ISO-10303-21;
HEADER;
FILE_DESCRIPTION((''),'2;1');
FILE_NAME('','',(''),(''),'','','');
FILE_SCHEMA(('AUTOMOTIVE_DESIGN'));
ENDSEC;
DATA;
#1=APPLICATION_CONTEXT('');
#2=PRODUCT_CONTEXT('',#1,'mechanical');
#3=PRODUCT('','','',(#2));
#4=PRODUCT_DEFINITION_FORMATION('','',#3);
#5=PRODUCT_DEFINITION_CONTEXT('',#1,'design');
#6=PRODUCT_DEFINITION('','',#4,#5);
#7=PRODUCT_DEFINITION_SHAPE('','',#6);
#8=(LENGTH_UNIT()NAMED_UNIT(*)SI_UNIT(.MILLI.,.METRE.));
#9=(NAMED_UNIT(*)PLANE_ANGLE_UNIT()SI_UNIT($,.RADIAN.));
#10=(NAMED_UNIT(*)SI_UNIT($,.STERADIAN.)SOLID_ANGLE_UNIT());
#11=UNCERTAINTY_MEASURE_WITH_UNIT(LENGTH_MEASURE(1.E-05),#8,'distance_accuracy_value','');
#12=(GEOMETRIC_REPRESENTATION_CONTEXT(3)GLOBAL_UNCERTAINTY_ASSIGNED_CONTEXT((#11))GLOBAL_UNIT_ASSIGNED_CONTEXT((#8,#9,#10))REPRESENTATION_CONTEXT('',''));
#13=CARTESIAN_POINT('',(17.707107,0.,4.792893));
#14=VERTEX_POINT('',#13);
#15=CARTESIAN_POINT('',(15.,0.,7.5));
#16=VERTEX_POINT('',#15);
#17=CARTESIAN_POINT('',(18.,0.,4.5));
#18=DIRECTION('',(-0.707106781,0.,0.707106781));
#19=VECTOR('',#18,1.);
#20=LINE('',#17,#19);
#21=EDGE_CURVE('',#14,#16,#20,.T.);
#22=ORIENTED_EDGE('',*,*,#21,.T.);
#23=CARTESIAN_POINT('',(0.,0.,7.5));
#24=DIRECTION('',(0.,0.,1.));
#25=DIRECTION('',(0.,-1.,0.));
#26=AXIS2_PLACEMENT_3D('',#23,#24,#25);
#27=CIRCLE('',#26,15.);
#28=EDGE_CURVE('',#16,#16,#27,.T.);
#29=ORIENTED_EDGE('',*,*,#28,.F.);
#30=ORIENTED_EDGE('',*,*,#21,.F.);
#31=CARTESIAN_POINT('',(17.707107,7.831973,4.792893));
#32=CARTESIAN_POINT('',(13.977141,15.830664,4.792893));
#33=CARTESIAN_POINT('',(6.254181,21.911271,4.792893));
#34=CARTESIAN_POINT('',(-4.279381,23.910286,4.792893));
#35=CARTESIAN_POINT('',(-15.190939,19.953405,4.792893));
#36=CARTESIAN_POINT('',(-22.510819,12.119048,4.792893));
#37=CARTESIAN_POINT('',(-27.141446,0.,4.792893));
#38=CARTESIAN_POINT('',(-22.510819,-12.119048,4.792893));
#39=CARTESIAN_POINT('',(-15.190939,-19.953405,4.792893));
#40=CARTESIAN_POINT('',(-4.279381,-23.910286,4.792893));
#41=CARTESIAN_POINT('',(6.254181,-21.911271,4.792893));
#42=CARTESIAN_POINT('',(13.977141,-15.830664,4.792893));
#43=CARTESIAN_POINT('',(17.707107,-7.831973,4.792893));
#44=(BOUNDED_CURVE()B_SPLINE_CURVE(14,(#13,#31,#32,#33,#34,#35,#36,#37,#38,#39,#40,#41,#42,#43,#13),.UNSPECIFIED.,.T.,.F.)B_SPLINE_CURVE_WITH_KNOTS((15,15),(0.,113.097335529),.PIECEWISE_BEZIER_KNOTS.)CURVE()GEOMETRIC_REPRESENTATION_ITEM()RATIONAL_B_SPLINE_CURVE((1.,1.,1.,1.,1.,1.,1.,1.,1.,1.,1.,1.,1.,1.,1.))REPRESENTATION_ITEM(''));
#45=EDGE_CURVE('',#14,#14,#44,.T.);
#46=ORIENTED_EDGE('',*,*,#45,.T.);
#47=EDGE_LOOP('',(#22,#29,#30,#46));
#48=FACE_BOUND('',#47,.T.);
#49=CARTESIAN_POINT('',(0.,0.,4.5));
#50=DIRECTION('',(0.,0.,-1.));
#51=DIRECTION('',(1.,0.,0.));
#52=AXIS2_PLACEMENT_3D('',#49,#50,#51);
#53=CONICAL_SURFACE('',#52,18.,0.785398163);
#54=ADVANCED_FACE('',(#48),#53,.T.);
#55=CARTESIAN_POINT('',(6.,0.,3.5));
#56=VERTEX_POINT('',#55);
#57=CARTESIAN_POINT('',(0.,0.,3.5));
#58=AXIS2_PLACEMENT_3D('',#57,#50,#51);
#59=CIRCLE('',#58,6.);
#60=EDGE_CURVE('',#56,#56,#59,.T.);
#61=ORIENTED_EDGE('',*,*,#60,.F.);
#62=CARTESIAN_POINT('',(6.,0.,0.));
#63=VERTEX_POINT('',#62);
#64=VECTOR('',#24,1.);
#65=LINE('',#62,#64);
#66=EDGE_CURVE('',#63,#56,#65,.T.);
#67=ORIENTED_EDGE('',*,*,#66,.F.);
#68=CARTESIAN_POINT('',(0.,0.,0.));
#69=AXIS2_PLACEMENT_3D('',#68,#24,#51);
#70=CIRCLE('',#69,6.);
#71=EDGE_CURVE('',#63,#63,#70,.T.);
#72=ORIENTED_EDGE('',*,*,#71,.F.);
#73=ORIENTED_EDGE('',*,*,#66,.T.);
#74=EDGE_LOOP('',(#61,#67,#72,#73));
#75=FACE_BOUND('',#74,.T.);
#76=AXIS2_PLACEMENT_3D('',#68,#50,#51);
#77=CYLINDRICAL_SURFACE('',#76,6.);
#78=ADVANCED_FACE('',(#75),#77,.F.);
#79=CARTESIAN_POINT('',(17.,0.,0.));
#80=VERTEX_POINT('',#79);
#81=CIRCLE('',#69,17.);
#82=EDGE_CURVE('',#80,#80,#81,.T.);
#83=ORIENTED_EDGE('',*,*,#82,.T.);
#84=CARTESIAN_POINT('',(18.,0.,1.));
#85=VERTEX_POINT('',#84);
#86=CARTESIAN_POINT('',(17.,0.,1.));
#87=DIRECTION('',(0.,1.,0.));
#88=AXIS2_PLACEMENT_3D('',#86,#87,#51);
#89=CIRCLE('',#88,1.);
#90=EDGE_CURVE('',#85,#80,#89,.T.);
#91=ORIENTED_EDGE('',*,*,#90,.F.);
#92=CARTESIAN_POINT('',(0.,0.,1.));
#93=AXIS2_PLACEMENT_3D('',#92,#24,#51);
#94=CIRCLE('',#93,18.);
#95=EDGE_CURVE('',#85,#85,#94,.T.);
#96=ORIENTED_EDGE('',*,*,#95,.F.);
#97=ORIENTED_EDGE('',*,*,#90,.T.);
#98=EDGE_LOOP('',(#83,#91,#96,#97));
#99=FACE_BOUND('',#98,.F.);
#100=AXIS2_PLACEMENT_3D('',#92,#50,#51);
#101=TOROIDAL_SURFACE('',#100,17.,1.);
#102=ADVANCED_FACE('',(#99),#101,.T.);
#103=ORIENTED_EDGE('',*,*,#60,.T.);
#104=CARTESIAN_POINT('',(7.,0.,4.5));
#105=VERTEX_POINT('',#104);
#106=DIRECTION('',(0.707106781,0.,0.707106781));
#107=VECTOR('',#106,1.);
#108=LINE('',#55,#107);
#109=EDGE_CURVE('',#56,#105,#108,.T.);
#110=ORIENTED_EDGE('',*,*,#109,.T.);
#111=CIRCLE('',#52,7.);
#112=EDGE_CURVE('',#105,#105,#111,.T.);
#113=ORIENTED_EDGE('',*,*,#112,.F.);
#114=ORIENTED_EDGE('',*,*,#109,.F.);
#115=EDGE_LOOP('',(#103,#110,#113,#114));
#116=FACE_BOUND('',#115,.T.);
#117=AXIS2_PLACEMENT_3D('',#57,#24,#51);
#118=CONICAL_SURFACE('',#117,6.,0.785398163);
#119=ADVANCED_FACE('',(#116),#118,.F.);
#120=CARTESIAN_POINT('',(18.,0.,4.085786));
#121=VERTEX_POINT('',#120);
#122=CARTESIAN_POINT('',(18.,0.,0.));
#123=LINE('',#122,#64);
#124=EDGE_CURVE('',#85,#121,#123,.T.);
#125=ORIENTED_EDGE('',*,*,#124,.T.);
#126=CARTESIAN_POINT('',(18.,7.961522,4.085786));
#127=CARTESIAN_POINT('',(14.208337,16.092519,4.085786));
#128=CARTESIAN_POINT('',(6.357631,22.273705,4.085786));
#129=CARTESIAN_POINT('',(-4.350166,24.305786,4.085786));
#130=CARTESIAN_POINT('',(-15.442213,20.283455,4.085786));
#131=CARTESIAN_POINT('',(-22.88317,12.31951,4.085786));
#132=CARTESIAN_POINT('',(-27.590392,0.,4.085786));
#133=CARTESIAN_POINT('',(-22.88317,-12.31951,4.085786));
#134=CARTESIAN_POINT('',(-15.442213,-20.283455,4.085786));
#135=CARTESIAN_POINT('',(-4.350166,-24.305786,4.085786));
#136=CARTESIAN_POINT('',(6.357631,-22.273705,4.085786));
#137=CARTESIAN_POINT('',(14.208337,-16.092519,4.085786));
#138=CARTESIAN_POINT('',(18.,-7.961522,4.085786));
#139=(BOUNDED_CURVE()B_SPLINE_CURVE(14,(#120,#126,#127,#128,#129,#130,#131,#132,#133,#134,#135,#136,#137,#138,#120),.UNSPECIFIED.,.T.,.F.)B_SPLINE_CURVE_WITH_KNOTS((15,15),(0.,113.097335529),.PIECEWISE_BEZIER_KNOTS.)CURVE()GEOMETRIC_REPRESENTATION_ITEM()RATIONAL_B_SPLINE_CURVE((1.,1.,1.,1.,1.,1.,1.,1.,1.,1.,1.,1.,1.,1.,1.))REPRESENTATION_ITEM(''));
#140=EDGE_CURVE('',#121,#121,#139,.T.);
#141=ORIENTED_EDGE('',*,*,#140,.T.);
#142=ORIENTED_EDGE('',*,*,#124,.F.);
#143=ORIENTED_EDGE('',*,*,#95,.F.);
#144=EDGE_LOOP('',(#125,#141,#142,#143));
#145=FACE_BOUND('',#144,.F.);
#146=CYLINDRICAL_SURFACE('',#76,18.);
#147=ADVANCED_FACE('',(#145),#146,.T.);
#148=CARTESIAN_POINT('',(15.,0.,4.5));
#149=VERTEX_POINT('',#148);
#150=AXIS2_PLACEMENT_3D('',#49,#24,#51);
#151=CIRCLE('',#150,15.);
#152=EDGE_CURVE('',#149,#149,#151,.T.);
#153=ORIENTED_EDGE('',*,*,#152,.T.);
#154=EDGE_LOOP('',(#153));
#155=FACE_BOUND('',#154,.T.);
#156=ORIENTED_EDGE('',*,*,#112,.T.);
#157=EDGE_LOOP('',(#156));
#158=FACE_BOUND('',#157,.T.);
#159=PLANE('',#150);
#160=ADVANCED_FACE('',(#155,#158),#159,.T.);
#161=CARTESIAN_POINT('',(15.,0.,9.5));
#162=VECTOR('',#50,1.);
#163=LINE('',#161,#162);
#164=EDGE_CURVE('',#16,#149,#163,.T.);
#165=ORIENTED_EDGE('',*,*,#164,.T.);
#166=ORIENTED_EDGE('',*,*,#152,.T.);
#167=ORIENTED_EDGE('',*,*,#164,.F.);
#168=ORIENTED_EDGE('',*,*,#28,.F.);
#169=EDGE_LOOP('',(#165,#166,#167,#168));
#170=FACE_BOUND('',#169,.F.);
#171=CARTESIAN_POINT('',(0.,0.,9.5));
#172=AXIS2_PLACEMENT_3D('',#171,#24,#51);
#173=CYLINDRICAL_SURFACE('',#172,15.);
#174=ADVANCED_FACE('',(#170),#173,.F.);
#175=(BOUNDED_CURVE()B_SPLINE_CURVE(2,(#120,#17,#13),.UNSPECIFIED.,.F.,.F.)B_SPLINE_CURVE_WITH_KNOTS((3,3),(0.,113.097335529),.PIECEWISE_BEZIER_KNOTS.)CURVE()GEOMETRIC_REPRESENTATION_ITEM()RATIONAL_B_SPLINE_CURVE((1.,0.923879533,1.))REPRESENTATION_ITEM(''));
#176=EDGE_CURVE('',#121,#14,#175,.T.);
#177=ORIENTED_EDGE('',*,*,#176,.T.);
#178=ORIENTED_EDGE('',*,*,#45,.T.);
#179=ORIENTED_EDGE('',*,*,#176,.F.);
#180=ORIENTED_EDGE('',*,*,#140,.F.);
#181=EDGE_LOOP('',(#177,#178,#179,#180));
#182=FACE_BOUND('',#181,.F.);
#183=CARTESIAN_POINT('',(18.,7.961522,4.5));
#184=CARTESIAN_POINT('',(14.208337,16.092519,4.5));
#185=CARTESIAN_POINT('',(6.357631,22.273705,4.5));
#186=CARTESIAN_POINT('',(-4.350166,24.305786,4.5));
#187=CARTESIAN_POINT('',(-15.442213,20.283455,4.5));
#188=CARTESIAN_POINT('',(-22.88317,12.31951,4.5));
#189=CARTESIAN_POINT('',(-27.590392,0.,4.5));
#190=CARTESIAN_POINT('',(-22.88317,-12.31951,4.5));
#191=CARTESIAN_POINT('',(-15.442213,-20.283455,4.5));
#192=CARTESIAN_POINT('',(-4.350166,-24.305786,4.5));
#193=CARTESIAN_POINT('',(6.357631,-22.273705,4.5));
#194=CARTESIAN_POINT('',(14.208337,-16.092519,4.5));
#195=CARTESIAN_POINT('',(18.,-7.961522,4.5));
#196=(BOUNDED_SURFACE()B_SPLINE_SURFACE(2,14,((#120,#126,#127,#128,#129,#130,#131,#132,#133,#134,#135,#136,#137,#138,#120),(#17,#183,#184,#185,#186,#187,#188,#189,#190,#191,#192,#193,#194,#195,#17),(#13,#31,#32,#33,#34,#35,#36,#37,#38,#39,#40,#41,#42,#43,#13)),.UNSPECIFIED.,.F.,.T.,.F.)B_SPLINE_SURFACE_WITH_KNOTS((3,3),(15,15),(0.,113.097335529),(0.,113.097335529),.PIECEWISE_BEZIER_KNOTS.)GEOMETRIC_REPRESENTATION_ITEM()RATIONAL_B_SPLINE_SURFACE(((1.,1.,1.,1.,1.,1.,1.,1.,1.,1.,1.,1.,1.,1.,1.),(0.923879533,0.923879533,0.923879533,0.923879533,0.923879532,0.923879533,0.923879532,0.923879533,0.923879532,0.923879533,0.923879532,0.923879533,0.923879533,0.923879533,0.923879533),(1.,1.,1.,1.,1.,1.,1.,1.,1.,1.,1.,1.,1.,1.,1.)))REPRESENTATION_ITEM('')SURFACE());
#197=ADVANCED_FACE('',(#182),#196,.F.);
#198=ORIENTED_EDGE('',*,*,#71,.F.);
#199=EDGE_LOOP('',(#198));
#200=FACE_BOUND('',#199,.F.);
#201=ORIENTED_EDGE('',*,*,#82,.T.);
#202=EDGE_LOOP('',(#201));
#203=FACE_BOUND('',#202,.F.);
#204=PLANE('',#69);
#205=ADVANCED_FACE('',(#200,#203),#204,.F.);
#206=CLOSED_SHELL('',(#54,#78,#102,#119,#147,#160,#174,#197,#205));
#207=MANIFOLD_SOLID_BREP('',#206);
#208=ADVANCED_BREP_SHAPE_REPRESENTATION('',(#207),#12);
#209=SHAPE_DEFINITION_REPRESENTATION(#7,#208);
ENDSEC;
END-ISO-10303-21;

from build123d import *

# Parameters (mm, degrees)
F0_R     = 18
F1_DEPTH = 9.5
F2_R     = 15
F3_DEPTH = 5
F4_R     = 6
F5_DEPTH = 5
F6_SIZE  = 1
F8_R     = 1
F9_R     = 1


# Not quite as in the source:
# - a fillet or chamfer that OpenCascade refuses, or shapes differently, is made with other operations: its cross-section is extruded or revolved along the edge and cut away or added


with BuildPart() as f1:
    # F0 (on Top) → F1 (new body)
    with BuildSketch(Plane.XY):
        Circle(F0_R)
    extrude(amount=F1_DEPTH)

    # F2 (on face) → F3 (cut)
    with BuildSketch(Plane.XY.offset(9.5)):
        Circle(F2_R)
    extrude(amount=-F3_DEPTH, mode=Mode.SUBTRACT)

    # F4 (on Top) → F5 (cut)
    with BuildSketch(Plane.XY):
        Circle(F4_R)
    extrude(amount=F5_DEPTH, mode=Mode.SUBTRACT)

    # F6
    f6_edges = [f1.edges().sort_by_distance(p)[0] for p in [
        (-6, 0, 4.5),
    ]]
    chamfer(f6_edges, length=F6_SIZE)

    # F7: chamfer of 5 on 1 edges, made by hand

    # F7_s1 → F7_t2 (revolve, cut)
    with BuildSketch(Plane.XZ):
        Polygon((18, 4.5), (13, 9.5), (18, 9.5), align=None)
    revolve(axis=Axis((0, 0, 9.5), (0, 0, 1)), mode=Mode.SUBTRACT)

    # F8
    f8_edges = [f1.edges().sort_by_distance(p)[0] for p in [
        (-18, 0, 4.5),
    ]]
    fillet(f8_edges, radius=F8_R)

    # F9
    f9_edges = [f1.edges().sort_by_distance(p)[0] for p in [
        (-18, 0, 0),
    ]]
    fillet(f9_edges, radius=F9_R)


solid = f1.part
